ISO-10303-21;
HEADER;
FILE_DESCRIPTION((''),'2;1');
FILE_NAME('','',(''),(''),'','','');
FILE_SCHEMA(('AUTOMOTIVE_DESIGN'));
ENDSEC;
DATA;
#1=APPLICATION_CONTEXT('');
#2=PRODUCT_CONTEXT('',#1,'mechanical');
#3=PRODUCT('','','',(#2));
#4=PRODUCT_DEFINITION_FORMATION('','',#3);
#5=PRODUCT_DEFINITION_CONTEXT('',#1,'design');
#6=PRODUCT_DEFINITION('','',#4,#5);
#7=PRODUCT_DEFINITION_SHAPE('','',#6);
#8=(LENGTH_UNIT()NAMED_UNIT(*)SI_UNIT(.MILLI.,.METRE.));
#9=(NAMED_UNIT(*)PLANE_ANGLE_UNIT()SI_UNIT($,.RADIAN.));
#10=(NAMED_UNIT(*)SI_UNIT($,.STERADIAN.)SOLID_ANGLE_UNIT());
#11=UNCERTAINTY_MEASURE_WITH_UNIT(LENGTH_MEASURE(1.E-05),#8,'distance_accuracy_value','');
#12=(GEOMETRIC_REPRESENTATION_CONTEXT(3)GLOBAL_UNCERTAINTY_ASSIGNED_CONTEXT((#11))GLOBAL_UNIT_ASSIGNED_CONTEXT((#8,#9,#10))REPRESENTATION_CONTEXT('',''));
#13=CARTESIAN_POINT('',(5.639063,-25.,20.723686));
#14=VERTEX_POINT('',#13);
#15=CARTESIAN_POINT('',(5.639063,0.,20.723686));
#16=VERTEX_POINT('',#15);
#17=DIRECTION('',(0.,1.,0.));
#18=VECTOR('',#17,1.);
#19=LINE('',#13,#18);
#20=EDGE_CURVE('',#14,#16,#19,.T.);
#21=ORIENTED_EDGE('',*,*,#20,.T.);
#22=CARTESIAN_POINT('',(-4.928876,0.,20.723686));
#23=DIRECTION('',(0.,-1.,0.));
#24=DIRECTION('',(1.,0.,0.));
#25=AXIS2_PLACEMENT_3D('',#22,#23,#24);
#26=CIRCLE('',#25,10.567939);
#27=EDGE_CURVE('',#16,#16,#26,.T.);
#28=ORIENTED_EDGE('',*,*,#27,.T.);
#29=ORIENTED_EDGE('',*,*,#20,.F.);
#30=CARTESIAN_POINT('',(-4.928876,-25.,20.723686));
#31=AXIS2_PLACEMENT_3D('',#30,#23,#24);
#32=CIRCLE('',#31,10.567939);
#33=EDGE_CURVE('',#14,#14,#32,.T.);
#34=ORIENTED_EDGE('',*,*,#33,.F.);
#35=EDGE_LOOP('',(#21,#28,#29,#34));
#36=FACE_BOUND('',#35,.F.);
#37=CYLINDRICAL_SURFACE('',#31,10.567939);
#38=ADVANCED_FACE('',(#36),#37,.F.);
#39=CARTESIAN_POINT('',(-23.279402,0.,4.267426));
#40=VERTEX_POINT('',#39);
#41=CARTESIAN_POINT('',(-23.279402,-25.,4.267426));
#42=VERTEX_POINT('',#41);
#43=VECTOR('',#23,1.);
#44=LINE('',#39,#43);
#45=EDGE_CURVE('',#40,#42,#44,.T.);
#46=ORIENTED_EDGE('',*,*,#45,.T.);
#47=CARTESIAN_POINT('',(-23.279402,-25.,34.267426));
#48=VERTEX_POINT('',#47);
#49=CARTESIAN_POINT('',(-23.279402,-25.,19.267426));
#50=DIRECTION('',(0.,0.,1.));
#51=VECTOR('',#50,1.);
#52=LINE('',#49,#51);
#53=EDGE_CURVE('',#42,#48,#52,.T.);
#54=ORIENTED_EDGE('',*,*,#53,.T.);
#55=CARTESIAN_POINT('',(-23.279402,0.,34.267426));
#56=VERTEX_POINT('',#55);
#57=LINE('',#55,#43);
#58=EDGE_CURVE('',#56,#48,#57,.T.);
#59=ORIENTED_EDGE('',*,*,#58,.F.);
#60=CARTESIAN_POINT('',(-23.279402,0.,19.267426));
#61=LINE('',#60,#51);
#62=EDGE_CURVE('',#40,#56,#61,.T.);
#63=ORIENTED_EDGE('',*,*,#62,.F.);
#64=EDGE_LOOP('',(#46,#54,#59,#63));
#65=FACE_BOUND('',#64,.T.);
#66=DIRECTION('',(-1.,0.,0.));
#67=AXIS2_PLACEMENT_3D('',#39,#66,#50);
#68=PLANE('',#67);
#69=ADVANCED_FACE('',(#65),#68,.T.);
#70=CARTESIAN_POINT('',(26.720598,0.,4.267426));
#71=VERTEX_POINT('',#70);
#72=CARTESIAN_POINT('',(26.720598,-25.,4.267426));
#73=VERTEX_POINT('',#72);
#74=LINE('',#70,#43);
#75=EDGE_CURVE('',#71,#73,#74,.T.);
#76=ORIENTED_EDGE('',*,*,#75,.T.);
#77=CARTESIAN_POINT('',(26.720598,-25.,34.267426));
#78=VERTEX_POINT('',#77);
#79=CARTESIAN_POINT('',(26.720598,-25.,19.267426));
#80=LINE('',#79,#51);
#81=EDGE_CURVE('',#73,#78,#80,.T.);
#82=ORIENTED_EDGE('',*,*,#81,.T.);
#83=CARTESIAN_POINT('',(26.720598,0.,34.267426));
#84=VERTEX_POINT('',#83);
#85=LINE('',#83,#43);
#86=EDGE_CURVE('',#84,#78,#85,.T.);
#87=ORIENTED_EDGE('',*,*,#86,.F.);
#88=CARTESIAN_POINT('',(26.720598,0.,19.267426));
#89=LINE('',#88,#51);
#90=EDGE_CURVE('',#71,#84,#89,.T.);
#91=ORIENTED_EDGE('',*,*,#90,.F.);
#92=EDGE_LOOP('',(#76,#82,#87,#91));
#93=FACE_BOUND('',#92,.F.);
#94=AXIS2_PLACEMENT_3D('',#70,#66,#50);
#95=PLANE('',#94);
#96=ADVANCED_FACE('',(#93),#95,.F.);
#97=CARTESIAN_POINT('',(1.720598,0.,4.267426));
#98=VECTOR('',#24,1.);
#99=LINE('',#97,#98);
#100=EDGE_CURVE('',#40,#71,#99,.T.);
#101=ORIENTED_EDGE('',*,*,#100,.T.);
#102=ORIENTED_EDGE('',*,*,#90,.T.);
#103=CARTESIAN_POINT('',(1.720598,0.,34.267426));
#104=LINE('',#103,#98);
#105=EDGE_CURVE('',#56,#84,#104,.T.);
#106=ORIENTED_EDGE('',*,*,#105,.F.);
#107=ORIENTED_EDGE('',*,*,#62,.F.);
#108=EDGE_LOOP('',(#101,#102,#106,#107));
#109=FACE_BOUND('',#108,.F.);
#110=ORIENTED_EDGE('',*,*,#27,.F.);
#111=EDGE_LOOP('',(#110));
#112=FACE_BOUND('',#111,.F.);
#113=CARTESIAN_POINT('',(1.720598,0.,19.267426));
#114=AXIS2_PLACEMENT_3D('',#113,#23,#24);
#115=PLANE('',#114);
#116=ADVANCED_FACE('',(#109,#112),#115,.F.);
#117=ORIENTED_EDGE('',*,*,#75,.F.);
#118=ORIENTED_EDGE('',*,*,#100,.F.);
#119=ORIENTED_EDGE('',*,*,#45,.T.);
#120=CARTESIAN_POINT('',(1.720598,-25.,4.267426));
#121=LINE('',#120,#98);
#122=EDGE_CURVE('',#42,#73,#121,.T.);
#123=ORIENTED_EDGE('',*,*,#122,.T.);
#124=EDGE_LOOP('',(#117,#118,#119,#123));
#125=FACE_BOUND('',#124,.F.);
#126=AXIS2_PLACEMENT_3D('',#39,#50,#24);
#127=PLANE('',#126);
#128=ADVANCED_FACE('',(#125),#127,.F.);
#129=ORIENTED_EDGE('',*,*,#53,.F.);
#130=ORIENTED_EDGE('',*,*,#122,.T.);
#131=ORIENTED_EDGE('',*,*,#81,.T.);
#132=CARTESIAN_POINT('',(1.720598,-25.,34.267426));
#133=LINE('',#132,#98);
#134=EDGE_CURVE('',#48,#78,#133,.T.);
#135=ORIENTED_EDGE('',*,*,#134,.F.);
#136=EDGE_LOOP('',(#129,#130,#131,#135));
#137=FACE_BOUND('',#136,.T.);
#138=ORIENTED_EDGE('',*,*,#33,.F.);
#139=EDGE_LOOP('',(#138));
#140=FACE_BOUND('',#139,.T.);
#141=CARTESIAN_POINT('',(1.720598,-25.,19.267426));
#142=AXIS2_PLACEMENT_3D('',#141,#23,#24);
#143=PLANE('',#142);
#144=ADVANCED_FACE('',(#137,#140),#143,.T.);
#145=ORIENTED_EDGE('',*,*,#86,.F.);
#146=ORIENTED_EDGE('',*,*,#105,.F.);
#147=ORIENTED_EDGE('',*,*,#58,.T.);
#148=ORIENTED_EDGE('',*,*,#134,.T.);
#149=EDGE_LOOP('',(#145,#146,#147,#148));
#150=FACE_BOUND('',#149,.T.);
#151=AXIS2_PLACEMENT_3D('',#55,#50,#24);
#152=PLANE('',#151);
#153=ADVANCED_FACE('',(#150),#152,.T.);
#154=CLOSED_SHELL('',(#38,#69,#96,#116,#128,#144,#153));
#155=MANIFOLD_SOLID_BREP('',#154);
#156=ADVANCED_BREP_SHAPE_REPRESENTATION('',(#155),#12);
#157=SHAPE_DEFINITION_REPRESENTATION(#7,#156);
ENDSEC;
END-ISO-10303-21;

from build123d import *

# Parameters (mm, degrees)
F0_W     = 50
F0_H     = 30
F1_DEPTH = 25
F2_R     = 10.5679387912
F3_DEPTH = 25


# Not quite as in the source:
# - a feature of the source that left no trace in its solid (it failed there, or was rolled back) is left out


with BuildPart() as f1:
    # F0 (on Front) → F1 (new body)
    with BuildSketch(Plane.XZ):
        with Locations((1.7205976233, 19.2674261052)):
            Rectangle(F0_W, F0_H)
    extrude(amount=F1_DEPTH)

    # F2 (on face) → F3 (cut)
    with BuildSketch(Plane.XZ.offset(25)):
        with Locations((-4.9288761802, 20.7236856222)):
            Circle(F2_R)
    extrude(amount=-F3_DEPTH, mode=Mode.SUBTRACT)


solid = f1.part
